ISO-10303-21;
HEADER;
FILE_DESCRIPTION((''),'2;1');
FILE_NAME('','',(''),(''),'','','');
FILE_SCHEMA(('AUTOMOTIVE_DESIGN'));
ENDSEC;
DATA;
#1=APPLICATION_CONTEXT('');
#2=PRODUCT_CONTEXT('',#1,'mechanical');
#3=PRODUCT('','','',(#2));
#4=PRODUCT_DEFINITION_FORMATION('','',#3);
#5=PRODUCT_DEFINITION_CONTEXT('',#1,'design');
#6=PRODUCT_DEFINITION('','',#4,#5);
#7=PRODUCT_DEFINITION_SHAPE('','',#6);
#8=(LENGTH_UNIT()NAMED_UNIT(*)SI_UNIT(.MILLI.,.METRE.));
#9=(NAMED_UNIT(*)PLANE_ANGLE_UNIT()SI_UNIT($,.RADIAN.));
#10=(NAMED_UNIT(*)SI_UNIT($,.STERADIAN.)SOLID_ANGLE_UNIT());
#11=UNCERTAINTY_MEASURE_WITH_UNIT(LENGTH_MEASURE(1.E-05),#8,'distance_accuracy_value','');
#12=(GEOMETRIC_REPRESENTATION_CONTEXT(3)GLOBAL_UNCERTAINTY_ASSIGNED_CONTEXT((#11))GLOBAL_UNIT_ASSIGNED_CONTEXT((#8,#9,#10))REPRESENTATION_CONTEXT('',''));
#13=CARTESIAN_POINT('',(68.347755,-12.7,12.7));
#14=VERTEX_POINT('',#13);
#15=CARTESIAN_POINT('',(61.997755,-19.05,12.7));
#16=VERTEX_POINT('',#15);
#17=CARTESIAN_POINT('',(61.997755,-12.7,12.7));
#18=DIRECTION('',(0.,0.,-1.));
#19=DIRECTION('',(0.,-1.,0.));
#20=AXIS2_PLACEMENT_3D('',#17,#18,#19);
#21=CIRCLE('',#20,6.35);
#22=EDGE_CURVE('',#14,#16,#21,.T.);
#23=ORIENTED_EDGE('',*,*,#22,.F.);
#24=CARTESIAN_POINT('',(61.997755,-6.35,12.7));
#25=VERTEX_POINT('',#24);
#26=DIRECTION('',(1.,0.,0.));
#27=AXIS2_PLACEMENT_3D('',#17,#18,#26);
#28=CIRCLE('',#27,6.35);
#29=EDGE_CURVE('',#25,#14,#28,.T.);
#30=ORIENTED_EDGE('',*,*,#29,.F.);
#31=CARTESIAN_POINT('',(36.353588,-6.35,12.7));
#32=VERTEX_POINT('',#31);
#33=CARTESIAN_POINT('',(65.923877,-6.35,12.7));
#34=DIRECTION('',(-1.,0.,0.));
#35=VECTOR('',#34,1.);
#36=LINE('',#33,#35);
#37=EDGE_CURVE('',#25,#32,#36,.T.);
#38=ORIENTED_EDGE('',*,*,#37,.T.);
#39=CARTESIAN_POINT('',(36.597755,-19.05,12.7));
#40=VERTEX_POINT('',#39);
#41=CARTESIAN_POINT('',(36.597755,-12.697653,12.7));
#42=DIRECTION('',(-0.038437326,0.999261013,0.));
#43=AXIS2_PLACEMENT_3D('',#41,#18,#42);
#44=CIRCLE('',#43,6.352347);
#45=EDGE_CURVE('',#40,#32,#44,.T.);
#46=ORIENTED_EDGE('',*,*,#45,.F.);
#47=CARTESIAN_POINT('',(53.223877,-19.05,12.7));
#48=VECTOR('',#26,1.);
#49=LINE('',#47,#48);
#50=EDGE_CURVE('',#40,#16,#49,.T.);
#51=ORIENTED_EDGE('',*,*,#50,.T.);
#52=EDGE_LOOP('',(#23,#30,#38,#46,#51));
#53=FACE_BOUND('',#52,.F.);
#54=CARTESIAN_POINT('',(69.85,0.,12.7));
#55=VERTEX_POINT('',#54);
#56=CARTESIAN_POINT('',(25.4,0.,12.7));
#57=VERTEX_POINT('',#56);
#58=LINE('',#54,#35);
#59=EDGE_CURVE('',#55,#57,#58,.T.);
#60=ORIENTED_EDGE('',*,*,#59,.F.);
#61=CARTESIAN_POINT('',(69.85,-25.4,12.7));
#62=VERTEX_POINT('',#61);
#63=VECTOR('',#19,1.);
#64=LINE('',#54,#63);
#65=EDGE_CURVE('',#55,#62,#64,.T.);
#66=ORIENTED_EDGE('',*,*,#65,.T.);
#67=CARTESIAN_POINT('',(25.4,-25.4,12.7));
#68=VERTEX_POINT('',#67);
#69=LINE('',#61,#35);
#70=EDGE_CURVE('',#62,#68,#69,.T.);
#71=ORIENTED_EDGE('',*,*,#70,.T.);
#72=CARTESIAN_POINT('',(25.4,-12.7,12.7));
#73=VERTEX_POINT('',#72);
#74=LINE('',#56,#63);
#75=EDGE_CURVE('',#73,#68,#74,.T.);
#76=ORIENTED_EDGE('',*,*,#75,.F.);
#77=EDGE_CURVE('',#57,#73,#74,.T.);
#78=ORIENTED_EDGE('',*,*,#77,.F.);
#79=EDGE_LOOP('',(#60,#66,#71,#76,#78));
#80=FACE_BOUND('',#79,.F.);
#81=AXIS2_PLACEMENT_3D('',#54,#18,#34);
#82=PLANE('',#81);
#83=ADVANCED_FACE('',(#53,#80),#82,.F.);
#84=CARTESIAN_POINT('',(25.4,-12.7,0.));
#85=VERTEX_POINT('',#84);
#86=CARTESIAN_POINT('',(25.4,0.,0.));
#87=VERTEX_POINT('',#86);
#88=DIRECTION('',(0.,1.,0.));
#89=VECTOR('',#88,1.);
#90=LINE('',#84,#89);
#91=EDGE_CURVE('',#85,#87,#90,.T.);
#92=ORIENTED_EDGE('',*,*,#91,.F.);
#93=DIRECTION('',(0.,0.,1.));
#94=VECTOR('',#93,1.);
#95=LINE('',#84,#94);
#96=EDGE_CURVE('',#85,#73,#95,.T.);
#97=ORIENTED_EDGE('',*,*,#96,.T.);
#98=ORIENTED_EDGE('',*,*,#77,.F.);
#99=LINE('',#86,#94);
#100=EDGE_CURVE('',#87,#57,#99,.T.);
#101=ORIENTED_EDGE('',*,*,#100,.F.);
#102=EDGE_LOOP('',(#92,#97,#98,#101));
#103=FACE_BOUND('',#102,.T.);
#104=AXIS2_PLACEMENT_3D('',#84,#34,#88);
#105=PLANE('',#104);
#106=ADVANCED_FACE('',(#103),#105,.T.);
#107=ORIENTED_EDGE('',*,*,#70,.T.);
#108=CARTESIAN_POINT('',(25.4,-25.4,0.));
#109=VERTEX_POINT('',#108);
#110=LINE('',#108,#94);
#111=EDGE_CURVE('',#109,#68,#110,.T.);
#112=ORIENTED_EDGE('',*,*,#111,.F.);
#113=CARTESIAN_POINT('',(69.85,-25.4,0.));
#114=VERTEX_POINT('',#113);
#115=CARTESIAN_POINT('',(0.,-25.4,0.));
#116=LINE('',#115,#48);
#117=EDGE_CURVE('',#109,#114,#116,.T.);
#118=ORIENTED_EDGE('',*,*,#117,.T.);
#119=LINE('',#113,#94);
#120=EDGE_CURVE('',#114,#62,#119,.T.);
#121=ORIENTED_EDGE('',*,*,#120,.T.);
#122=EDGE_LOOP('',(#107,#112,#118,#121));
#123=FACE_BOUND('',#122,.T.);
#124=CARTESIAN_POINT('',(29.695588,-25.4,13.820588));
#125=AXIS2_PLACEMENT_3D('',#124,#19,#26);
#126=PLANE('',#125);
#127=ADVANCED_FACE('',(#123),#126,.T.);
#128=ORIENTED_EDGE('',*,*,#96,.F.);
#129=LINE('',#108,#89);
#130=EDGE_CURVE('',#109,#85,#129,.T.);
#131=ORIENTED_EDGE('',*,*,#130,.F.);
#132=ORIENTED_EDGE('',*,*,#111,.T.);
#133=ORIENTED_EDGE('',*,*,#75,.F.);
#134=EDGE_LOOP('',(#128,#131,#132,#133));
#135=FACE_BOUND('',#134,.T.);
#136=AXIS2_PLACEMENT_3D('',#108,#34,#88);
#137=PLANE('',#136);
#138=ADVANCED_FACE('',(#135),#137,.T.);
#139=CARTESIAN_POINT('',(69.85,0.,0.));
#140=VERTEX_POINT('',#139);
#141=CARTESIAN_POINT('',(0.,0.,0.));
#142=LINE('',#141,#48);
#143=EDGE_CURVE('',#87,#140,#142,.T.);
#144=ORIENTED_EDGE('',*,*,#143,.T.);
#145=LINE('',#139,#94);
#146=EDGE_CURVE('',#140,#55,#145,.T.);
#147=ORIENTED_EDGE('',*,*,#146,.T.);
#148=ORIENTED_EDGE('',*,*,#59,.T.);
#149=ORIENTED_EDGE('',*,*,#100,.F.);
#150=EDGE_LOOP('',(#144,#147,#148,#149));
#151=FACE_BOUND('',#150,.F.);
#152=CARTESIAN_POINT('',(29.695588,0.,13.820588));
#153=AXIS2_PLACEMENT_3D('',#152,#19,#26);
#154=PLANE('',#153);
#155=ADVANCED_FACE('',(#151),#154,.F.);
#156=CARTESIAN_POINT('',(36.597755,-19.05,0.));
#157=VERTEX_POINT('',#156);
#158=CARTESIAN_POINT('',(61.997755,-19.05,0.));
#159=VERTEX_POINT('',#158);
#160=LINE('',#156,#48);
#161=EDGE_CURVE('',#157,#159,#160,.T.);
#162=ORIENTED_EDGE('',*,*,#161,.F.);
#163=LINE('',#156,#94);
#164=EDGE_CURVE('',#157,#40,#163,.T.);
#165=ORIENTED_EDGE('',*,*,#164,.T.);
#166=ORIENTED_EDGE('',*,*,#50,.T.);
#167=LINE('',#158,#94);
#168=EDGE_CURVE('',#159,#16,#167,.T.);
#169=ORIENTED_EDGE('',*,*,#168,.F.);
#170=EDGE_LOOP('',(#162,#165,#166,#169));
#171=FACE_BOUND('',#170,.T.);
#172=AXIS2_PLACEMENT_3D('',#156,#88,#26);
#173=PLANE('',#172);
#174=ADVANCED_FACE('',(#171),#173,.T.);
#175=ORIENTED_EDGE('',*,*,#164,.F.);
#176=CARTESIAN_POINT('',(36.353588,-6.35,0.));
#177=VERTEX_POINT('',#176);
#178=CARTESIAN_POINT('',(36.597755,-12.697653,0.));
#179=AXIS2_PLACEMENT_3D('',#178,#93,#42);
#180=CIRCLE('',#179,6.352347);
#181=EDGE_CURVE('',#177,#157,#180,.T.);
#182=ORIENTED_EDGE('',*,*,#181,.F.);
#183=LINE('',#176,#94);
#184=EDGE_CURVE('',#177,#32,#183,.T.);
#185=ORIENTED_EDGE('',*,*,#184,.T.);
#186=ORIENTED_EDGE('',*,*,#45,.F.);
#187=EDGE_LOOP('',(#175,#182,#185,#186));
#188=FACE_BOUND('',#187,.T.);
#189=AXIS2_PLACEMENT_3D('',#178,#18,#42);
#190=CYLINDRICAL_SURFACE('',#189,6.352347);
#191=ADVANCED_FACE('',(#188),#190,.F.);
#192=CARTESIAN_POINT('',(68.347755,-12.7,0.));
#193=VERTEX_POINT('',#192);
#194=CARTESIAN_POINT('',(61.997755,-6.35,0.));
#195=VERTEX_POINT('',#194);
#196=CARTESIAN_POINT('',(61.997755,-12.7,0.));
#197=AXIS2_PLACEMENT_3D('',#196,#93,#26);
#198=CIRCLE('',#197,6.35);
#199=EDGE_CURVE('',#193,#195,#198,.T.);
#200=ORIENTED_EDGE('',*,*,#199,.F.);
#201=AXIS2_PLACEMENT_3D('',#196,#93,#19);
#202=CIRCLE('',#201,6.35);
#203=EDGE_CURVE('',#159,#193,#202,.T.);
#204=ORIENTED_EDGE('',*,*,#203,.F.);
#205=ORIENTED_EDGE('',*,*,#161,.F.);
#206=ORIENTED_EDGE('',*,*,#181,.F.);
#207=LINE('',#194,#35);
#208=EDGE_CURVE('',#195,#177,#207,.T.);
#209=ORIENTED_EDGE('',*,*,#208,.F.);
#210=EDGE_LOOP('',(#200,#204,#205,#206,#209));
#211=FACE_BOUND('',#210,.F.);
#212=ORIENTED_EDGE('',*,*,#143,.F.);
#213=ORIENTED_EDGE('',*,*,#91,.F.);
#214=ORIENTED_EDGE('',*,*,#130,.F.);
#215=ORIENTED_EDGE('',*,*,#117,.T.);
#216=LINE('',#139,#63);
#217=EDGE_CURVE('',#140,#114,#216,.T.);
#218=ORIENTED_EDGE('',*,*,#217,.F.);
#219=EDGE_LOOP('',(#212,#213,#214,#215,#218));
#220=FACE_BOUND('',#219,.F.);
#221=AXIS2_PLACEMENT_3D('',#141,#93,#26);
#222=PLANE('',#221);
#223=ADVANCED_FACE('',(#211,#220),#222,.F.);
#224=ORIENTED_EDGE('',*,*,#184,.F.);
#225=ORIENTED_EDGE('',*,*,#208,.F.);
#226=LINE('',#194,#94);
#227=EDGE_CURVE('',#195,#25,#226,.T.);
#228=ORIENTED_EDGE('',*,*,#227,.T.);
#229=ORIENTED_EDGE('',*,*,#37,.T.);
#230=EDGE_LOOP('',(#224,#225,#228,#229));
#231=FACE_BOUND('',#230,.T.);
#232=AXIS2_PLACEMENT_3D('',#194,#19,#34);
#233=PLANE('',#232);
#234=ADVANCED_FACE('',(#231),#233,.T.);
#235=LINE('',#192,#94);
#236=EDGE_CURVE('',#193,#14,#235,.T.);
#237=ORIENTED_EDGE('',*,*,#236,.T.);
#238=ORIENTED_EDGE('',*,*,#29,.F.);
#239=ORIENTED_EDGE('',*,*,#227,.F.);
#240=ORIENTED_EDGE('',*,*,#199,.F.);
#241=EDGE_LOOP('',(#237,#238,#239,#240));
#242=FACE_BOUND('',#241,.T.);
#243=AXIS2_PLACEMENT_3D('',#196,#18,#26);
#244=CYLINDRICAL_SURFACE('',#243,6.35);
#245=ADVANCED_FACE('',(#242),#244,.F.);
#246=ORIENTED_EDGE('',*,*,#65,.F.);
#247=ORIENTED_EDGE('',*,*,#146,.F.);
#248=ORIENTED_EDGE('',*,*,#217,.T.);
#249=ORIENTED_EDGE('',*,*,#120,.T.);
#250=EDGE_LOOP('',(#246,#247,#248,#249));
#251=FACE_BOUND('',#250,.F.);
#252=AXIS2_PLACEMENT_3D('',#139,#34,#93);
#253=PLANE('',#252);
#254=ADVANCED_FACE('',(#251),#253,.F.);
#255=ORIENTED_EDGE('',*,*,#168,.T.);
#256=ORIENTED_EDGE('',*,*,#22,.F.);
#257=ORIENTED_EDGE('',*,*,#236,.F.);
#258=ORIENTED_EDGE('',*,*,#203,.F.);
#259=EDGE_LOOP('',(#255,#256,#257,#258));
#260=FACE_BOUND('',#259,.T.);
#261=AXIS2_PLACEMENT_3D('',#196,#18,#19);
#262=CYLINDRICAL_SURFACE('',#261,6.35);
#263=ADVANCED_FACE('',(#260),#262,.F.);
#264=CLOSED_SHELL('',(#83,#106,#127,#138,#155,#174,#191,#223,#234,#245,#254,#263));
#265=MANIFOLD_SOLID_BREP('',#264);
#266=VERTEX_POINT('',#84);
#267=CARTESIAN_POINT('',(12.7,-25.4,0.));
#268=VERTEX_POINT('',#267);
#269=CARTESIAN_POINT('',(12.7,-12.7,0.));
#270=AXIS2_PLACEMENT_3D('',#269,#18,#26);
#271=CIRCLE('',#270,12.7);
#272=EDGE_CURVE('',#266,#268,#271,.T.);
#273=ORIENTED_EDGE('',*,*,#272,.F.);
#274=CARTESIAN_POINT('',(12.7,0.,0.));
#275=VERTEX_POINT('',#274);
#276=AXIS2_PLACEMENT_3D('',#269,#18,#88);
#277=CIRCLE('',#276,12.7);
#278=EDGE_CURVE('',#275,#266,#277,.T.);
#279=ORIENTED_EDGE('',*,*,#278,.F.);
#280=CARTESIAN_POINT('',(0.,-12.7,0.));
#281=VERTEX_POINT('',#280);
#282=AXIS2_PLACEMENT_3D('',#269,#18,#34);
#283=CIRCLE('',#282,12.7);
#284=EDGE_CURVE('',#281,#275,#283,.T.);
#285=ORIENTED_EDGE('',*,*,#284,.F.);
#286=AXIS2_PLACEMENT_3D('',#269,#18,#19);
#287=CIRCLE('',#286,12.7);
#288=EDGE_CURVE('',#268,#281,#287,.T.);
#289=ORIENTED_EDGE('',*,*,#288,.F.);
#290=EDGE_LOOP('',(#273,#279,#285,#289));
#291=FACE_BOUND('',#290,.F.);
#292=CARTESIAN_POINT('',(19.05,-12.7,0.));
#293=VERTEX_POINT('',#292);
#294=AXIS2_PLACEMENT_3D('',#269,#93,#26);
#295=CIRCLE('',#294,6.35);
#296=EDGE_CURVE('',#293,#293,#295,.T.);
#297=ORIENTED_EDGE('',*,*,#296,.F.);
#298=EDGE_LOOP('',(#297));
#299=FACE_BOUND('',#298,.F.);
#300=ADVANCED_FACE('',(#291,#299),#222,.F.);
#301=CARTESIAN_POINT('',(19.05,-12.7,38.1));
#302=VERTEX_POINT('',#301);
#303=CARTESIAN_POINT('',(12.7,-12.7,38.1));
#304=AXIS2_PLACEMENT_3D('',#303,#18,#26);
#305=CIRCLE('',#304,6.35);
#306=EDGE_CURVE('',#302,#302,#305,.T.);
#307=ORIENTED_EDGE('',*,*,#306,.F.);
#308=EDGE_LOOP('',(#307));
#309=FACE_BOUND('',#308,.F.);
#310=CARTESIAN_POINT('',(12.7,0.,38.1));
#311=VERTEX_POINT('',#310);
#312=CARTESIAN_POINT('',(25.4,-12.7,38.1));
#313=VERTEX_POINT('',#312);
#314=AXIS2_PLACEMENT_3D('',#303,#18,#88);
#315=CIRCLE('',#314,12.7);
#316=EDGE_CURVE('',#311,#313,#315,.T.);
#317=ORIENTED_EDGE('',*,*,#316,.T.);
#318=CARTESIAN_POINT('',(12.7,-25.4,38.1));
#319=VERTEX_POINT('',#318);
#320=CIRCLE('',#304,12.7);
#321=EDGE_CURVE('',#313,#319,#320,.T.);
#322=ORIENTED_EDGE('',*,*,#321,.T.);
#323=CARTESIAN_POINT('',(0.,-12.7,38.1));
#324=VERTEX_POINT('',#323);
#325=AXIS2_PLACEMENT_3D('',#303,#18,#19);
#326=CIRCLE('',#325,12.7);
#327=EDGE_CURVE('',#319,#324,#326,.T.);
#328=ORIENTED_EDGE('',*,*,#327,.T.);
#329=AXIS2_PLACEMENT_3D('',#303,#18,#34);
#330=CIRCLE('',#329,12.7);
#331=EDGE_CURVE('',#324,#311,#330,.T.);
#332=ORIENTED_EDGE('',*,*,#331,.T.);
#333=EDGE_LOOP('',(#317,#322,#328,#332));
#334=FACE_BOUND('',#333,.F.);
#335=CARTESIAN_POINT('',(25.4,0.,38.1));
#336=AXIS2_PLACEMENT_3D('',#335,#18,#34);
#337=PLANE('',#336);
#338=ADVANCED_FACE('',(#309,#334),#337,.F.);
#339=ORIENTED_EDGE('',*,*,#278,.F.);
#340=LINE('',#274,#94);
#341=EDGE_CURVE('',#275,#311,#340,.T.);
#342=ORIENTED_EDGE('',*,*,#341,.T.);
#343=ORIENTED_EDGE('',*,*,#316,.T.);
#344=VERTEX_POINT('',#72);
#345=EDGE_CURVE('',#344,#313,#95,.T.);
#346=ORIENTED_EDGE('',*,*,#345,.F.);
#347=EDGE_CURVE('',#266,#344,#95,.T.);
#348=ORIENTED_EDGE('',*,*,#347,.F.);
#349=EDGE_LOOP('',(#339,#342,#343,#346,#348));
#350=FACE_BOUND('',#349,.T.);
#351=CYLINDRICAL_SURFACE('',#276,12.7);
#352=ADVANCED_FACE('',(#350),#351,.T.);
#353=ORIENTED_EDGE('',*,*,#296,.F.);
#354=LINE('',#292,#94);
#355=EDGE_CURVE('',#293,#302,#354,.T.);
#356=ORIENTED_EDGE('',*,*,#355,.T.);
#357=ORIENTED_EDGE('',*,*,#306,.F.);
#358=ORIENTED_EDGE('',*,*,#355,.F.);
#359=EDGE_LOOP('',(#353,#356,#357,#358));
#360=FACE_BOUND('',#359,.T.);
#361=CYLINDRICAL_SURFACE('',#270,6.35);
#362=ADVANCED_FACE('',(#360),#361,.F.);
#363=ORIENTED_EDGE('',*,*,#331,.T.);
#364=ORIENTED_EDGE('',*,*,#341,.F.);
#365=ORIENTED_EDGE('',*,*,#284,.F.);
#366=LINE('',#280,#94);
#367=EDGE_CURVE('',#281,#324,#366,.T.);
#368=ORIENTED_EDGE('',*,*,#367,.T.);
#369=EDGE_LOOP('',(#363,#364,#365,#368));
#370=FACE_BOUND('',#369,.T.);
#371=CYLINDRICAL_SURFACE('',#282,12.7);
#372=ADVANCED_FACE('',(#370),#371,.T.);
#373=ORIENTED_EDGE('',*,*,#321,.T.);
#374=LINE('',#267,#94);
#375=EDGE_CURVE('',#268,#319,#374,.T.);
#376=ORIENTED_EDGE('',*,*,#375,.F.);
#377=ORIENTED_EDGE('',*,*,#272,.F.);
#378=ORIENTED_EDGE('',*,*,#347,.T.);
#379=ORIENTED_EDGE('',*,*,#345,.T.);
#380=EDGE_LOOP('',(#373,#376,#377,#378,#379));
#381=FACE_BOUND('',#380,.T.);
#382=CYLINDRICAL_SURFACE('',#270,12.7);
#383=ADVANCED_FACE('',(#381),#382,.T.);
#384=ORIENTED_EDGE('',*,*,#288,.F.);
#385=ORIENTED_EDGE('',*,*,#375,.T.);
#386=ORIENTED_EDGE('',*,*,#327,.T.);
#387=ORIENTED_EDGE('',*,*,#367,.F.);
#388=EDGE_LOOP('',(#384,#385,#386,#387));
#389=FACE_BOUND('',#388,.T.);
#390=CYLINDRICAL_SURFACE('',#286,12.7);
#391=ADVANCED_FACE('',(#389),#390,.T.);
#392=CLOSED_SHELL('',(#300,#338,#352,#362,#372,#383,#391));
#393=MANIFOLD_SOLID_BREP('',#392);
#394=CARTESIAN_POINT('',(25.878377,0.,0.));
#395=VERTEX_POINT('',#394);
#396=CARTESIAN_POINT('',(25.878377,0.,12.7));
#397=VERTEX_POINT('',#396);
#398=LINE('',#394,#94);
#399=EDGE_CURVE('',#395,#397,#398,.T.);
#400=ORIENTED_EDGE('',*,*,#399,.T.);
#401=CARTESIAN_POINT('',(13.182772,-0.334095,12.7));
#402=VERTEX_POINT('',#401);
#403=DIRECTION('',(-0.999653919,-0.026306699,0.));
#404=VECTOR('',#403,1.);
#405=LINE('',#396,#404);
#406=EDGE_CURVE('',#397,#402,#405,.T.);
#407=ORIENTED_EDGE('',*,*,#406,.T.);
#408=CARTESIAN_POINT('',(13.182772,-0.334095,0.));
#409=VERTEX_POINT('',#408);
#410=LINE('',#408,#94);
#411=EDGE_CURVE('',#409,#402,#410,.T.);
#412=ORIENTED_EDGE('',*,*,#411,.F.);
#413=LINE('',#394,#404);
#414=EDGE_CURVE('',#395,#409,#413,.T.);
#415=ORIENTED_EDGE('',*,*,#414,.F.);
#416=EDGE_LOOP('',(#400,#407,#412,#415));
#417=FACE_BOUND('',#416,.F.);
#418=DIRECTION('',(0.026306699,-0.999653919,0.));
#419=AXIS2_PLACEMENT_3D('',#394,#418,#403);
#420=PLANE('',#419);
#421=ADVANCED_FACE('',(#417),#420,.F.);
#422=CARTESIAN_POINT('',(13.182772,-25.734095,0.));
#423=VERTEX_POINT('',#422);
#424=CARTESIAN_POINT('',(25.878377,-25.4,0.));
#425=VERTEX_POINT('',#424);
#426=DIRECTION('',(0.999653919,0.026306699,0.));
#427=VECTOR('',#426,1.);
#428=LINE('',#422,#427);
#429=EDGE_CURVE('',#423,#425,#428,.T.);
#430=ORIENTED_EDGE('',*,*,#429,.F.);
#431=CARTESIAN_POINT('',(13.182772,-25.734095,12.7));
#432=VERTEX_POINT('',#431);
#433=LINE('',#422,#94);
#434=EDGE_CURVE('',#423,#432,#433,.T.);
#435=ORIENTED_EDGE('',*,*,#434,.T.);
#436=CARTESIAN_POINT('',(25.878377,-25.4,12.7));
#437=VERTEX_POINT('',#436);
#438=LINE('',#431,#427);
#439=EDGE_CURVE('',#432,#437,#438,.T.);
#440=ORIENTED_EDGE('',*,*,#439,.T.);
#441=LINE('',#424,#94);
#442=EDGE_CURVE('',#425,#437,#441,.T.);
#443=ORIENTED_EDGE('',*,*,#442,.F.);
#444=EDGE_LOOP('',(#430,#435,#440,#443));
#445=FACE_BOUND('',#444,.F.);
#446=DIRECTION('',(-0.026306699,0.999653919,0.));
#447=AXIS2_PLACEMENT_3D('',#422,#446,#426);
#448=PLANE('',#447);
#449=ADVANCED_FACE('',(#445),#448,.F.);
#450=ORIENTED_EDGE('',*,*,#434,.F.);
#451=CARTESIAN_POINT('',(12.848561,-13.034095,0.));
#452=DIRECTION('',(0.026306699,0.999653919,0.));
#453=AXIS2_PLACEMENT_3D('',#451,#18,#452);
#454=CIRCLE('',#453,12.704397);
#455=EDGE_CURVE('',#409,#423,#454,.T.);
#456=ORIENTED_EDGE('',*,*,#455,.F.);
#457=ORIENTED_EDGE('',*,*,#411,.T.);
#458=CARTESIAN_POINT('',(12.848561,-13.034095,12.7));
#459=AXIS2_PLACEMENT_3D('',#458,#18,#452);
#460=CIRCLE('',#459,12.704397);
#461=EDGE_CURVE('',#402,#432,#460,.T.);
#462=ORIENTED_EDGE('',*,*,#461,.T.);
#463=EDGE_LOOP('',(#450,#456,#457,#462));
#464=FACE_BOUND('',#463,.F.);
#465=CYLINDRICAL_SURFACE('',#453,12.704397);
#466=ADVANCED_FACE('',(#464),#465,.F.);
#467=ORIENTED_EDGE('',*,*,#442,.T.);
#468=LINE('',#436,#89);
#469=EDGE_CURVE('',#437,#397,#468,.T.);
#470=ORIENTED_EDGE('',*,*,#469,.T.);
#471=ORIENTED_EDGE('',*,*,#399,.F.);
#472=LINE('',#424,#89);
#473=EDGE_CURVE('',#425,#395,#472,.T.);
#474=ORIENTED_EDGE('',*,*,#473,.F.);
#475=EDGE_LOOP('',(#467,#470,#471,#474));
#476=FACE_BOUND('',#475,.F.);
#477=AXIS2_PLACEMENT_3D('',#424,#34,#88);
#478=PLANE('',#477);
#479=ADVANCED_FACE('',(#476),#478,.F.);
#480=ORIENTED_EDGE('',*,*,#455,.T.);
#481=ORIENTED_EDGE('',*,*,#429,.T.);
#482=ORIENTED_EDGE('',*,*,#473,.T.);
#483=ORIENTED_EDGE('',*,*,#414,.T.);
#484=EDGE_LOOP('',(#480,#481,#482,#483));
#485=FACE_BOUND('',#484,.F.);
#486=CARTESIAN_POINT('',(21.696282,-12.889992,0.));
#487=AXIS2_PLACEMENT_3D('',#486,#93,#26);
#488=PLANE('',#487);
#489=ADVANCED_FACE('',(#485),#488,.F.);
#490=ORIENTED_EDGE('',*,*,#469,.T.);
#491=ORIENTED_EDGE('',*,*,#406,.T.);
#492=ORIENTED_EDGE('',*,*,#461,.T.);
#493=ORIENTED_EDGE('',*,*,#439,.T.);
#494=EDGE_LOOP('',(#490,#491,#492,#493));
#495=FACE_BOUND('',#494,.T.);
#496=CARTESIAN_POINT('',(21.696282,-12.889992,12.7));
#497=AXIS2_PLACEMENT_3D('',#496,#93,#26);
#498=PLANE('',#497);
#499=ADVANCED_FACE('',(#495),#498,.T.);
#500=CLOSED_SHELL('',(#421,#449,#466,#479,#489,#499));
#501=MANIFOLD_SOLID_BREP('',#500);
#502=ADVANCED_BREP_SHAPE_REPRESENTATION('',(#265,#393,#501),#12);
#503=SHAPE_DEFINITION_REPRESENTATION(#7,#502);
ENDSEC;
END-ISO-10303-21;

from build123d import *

# Parameters (mm, degrees)
F1_DEPTH = 25.4
F3_DEPTH = 50.8
F4_R     = 6.35
F5_DEPTH = 50.8
F7_DEPTH = 12.7


# Not quite as in the source:
# - a feature names something its author has since deleted; it is built from what else it names


with BuildPart() as f1:
    # F0 (on Front) → F1 (new body)
    with BuildSketch(Plane.XZ):
        Polygon((0, 38.1), (0, 0), (69.85, 0), (69.85, 12.7), (25.4, 12.7), (25.4, 38.1), align=None)
    extrude(amount=F1_DEPTH)

    # F2 (on Top) → F3 (cut)
    with BuildSketch(Plane.XY):
        with BuildLine():
            ThreePointArc((42.9501019467, -12.6976528488), (41.0895425425, -17.1894405959), (36.5977547955, -19.05))
            Line((36.5977547955, -19.05), (61.9977547955, -19.05))
            ThreePointArc((61.9977547955, -19.05), (55.6477547955, -12.7), (61.9977547955, -6.35))
            Line((61.9977547955, -6.35), (36.8419220343, -6.35))
            ThreePointArc((36.8419220343, -6.35), (41.1750547307, -8.2930371297), (42.9501019467, -12.6976528488))
        make_face()
        with BuildLine():
            ThreePointArc((61.9977547955, -6.35), (55.6477547955, -12.7), (61.9977547955, -19.05))
            Line((61.9977547955, -19.05), (61.9977547955, -6.35))
        make_face()
        with BuildLine():
            Line((61.9977547955, -6.35), (61.9977547955, -19.05))
            ThreePointArc((61.9977547955, -19.05), (66.487882856, -17.1901280605), (68.3477547955, -12.7))
            ThreePointArc((68.3477547955, -12.7), (66.487882856, -8.2098719395), (61.9977547955, -6.35))
        make_face()
        with BuildLine():
            Line((36.8419220343, -6.35), (36.3535875566, -6.35))
            Line((36.3535875566, -6.35), (36.5977547955, -19.05))
            ThreePointArc((36.5977547955, -19.05), (41.0895425425, -17.1894405959), (42.9501019467, -12.6976528488))
            ThreePointArc((42.9501019467, -12.6976528488), (41.1750547307, -8.2930371297), (36.8419220343, -6.35))
        make_face()
        with BuildLine():
            Line((36.5977547955, -19.05), (36.3535875566, -6.35))
            ThreePointArc((36.3535875566, -6.35), (30.2465813283, -12.819759029), (36.5977547955, -19.05))
        make_face()
    extrude(amount=F3_DEPTH, mode=Mode.SUBTRACT)

    # F4 (on Top) → F5 (cut)
    with BuildSketch(Plane.XY):
        with BuildLine():
            Line((0, -25.4), (12.7, -25.4))
            ThreePointArc((12.7, -25.4), (3.7197438789, -21.6802561211), (0, -12.7))
            Line((0, -12.7), (0, -25.4))
        make_face()
        with BuildLine():
            Line((0, 0), (0, -12.7))
            ThreePointArc((0, -12.7), (3.7197438789, -3.7197438789), (12.7, 0))
            Line((12.7, 0), (0, 0))
        make_face()
        with BuildLine():
            ThreePointArc((12.7, 0), (21.6802561211, -3.7197438789), (25.4, -12.7))
            Line((25.4, -12.7), (25.4, 0))
            Line((25.4, 0), (12.7, 0))
        make_face()
        with BuildLine():
            ThreePointArc((25.4, -12.7), (21.6802561211, -21.6802561211), (12.7, -25.4))
            Line((12.7, -25.4), (25.4, -25.4))
            Line((25.4, -25.4), (25.4, -12.7))
        make_face()
        with Locations((12.7, -12.7)):
            Circle(F4_R)
    extrude(amount=F5_DEPTH, mode=Mode.SUBTRACT)


with BuildPart() as f7:
    # F6 (on Top) → F7 (new body)
    with BuildSketch(Plane.XY):
        with BuildLine():
            ThreePointArc((13.1827720211, -0.334095074), (25.5529580345, -13.034095074), (13.1827720211, -25.734095074))
            Line((13.1827720211, -25.734095074), (25.8783767913, -25.4))
            Line((25.8783767913, -25.4), (25.8783767913, 0))
            Line((25.8783767913, 0), (13.1827720211, -0.334095074))
        make_face()
    extrude(amount=F7_DEPTH)


solid = Compound([f1.part, f7.part])
